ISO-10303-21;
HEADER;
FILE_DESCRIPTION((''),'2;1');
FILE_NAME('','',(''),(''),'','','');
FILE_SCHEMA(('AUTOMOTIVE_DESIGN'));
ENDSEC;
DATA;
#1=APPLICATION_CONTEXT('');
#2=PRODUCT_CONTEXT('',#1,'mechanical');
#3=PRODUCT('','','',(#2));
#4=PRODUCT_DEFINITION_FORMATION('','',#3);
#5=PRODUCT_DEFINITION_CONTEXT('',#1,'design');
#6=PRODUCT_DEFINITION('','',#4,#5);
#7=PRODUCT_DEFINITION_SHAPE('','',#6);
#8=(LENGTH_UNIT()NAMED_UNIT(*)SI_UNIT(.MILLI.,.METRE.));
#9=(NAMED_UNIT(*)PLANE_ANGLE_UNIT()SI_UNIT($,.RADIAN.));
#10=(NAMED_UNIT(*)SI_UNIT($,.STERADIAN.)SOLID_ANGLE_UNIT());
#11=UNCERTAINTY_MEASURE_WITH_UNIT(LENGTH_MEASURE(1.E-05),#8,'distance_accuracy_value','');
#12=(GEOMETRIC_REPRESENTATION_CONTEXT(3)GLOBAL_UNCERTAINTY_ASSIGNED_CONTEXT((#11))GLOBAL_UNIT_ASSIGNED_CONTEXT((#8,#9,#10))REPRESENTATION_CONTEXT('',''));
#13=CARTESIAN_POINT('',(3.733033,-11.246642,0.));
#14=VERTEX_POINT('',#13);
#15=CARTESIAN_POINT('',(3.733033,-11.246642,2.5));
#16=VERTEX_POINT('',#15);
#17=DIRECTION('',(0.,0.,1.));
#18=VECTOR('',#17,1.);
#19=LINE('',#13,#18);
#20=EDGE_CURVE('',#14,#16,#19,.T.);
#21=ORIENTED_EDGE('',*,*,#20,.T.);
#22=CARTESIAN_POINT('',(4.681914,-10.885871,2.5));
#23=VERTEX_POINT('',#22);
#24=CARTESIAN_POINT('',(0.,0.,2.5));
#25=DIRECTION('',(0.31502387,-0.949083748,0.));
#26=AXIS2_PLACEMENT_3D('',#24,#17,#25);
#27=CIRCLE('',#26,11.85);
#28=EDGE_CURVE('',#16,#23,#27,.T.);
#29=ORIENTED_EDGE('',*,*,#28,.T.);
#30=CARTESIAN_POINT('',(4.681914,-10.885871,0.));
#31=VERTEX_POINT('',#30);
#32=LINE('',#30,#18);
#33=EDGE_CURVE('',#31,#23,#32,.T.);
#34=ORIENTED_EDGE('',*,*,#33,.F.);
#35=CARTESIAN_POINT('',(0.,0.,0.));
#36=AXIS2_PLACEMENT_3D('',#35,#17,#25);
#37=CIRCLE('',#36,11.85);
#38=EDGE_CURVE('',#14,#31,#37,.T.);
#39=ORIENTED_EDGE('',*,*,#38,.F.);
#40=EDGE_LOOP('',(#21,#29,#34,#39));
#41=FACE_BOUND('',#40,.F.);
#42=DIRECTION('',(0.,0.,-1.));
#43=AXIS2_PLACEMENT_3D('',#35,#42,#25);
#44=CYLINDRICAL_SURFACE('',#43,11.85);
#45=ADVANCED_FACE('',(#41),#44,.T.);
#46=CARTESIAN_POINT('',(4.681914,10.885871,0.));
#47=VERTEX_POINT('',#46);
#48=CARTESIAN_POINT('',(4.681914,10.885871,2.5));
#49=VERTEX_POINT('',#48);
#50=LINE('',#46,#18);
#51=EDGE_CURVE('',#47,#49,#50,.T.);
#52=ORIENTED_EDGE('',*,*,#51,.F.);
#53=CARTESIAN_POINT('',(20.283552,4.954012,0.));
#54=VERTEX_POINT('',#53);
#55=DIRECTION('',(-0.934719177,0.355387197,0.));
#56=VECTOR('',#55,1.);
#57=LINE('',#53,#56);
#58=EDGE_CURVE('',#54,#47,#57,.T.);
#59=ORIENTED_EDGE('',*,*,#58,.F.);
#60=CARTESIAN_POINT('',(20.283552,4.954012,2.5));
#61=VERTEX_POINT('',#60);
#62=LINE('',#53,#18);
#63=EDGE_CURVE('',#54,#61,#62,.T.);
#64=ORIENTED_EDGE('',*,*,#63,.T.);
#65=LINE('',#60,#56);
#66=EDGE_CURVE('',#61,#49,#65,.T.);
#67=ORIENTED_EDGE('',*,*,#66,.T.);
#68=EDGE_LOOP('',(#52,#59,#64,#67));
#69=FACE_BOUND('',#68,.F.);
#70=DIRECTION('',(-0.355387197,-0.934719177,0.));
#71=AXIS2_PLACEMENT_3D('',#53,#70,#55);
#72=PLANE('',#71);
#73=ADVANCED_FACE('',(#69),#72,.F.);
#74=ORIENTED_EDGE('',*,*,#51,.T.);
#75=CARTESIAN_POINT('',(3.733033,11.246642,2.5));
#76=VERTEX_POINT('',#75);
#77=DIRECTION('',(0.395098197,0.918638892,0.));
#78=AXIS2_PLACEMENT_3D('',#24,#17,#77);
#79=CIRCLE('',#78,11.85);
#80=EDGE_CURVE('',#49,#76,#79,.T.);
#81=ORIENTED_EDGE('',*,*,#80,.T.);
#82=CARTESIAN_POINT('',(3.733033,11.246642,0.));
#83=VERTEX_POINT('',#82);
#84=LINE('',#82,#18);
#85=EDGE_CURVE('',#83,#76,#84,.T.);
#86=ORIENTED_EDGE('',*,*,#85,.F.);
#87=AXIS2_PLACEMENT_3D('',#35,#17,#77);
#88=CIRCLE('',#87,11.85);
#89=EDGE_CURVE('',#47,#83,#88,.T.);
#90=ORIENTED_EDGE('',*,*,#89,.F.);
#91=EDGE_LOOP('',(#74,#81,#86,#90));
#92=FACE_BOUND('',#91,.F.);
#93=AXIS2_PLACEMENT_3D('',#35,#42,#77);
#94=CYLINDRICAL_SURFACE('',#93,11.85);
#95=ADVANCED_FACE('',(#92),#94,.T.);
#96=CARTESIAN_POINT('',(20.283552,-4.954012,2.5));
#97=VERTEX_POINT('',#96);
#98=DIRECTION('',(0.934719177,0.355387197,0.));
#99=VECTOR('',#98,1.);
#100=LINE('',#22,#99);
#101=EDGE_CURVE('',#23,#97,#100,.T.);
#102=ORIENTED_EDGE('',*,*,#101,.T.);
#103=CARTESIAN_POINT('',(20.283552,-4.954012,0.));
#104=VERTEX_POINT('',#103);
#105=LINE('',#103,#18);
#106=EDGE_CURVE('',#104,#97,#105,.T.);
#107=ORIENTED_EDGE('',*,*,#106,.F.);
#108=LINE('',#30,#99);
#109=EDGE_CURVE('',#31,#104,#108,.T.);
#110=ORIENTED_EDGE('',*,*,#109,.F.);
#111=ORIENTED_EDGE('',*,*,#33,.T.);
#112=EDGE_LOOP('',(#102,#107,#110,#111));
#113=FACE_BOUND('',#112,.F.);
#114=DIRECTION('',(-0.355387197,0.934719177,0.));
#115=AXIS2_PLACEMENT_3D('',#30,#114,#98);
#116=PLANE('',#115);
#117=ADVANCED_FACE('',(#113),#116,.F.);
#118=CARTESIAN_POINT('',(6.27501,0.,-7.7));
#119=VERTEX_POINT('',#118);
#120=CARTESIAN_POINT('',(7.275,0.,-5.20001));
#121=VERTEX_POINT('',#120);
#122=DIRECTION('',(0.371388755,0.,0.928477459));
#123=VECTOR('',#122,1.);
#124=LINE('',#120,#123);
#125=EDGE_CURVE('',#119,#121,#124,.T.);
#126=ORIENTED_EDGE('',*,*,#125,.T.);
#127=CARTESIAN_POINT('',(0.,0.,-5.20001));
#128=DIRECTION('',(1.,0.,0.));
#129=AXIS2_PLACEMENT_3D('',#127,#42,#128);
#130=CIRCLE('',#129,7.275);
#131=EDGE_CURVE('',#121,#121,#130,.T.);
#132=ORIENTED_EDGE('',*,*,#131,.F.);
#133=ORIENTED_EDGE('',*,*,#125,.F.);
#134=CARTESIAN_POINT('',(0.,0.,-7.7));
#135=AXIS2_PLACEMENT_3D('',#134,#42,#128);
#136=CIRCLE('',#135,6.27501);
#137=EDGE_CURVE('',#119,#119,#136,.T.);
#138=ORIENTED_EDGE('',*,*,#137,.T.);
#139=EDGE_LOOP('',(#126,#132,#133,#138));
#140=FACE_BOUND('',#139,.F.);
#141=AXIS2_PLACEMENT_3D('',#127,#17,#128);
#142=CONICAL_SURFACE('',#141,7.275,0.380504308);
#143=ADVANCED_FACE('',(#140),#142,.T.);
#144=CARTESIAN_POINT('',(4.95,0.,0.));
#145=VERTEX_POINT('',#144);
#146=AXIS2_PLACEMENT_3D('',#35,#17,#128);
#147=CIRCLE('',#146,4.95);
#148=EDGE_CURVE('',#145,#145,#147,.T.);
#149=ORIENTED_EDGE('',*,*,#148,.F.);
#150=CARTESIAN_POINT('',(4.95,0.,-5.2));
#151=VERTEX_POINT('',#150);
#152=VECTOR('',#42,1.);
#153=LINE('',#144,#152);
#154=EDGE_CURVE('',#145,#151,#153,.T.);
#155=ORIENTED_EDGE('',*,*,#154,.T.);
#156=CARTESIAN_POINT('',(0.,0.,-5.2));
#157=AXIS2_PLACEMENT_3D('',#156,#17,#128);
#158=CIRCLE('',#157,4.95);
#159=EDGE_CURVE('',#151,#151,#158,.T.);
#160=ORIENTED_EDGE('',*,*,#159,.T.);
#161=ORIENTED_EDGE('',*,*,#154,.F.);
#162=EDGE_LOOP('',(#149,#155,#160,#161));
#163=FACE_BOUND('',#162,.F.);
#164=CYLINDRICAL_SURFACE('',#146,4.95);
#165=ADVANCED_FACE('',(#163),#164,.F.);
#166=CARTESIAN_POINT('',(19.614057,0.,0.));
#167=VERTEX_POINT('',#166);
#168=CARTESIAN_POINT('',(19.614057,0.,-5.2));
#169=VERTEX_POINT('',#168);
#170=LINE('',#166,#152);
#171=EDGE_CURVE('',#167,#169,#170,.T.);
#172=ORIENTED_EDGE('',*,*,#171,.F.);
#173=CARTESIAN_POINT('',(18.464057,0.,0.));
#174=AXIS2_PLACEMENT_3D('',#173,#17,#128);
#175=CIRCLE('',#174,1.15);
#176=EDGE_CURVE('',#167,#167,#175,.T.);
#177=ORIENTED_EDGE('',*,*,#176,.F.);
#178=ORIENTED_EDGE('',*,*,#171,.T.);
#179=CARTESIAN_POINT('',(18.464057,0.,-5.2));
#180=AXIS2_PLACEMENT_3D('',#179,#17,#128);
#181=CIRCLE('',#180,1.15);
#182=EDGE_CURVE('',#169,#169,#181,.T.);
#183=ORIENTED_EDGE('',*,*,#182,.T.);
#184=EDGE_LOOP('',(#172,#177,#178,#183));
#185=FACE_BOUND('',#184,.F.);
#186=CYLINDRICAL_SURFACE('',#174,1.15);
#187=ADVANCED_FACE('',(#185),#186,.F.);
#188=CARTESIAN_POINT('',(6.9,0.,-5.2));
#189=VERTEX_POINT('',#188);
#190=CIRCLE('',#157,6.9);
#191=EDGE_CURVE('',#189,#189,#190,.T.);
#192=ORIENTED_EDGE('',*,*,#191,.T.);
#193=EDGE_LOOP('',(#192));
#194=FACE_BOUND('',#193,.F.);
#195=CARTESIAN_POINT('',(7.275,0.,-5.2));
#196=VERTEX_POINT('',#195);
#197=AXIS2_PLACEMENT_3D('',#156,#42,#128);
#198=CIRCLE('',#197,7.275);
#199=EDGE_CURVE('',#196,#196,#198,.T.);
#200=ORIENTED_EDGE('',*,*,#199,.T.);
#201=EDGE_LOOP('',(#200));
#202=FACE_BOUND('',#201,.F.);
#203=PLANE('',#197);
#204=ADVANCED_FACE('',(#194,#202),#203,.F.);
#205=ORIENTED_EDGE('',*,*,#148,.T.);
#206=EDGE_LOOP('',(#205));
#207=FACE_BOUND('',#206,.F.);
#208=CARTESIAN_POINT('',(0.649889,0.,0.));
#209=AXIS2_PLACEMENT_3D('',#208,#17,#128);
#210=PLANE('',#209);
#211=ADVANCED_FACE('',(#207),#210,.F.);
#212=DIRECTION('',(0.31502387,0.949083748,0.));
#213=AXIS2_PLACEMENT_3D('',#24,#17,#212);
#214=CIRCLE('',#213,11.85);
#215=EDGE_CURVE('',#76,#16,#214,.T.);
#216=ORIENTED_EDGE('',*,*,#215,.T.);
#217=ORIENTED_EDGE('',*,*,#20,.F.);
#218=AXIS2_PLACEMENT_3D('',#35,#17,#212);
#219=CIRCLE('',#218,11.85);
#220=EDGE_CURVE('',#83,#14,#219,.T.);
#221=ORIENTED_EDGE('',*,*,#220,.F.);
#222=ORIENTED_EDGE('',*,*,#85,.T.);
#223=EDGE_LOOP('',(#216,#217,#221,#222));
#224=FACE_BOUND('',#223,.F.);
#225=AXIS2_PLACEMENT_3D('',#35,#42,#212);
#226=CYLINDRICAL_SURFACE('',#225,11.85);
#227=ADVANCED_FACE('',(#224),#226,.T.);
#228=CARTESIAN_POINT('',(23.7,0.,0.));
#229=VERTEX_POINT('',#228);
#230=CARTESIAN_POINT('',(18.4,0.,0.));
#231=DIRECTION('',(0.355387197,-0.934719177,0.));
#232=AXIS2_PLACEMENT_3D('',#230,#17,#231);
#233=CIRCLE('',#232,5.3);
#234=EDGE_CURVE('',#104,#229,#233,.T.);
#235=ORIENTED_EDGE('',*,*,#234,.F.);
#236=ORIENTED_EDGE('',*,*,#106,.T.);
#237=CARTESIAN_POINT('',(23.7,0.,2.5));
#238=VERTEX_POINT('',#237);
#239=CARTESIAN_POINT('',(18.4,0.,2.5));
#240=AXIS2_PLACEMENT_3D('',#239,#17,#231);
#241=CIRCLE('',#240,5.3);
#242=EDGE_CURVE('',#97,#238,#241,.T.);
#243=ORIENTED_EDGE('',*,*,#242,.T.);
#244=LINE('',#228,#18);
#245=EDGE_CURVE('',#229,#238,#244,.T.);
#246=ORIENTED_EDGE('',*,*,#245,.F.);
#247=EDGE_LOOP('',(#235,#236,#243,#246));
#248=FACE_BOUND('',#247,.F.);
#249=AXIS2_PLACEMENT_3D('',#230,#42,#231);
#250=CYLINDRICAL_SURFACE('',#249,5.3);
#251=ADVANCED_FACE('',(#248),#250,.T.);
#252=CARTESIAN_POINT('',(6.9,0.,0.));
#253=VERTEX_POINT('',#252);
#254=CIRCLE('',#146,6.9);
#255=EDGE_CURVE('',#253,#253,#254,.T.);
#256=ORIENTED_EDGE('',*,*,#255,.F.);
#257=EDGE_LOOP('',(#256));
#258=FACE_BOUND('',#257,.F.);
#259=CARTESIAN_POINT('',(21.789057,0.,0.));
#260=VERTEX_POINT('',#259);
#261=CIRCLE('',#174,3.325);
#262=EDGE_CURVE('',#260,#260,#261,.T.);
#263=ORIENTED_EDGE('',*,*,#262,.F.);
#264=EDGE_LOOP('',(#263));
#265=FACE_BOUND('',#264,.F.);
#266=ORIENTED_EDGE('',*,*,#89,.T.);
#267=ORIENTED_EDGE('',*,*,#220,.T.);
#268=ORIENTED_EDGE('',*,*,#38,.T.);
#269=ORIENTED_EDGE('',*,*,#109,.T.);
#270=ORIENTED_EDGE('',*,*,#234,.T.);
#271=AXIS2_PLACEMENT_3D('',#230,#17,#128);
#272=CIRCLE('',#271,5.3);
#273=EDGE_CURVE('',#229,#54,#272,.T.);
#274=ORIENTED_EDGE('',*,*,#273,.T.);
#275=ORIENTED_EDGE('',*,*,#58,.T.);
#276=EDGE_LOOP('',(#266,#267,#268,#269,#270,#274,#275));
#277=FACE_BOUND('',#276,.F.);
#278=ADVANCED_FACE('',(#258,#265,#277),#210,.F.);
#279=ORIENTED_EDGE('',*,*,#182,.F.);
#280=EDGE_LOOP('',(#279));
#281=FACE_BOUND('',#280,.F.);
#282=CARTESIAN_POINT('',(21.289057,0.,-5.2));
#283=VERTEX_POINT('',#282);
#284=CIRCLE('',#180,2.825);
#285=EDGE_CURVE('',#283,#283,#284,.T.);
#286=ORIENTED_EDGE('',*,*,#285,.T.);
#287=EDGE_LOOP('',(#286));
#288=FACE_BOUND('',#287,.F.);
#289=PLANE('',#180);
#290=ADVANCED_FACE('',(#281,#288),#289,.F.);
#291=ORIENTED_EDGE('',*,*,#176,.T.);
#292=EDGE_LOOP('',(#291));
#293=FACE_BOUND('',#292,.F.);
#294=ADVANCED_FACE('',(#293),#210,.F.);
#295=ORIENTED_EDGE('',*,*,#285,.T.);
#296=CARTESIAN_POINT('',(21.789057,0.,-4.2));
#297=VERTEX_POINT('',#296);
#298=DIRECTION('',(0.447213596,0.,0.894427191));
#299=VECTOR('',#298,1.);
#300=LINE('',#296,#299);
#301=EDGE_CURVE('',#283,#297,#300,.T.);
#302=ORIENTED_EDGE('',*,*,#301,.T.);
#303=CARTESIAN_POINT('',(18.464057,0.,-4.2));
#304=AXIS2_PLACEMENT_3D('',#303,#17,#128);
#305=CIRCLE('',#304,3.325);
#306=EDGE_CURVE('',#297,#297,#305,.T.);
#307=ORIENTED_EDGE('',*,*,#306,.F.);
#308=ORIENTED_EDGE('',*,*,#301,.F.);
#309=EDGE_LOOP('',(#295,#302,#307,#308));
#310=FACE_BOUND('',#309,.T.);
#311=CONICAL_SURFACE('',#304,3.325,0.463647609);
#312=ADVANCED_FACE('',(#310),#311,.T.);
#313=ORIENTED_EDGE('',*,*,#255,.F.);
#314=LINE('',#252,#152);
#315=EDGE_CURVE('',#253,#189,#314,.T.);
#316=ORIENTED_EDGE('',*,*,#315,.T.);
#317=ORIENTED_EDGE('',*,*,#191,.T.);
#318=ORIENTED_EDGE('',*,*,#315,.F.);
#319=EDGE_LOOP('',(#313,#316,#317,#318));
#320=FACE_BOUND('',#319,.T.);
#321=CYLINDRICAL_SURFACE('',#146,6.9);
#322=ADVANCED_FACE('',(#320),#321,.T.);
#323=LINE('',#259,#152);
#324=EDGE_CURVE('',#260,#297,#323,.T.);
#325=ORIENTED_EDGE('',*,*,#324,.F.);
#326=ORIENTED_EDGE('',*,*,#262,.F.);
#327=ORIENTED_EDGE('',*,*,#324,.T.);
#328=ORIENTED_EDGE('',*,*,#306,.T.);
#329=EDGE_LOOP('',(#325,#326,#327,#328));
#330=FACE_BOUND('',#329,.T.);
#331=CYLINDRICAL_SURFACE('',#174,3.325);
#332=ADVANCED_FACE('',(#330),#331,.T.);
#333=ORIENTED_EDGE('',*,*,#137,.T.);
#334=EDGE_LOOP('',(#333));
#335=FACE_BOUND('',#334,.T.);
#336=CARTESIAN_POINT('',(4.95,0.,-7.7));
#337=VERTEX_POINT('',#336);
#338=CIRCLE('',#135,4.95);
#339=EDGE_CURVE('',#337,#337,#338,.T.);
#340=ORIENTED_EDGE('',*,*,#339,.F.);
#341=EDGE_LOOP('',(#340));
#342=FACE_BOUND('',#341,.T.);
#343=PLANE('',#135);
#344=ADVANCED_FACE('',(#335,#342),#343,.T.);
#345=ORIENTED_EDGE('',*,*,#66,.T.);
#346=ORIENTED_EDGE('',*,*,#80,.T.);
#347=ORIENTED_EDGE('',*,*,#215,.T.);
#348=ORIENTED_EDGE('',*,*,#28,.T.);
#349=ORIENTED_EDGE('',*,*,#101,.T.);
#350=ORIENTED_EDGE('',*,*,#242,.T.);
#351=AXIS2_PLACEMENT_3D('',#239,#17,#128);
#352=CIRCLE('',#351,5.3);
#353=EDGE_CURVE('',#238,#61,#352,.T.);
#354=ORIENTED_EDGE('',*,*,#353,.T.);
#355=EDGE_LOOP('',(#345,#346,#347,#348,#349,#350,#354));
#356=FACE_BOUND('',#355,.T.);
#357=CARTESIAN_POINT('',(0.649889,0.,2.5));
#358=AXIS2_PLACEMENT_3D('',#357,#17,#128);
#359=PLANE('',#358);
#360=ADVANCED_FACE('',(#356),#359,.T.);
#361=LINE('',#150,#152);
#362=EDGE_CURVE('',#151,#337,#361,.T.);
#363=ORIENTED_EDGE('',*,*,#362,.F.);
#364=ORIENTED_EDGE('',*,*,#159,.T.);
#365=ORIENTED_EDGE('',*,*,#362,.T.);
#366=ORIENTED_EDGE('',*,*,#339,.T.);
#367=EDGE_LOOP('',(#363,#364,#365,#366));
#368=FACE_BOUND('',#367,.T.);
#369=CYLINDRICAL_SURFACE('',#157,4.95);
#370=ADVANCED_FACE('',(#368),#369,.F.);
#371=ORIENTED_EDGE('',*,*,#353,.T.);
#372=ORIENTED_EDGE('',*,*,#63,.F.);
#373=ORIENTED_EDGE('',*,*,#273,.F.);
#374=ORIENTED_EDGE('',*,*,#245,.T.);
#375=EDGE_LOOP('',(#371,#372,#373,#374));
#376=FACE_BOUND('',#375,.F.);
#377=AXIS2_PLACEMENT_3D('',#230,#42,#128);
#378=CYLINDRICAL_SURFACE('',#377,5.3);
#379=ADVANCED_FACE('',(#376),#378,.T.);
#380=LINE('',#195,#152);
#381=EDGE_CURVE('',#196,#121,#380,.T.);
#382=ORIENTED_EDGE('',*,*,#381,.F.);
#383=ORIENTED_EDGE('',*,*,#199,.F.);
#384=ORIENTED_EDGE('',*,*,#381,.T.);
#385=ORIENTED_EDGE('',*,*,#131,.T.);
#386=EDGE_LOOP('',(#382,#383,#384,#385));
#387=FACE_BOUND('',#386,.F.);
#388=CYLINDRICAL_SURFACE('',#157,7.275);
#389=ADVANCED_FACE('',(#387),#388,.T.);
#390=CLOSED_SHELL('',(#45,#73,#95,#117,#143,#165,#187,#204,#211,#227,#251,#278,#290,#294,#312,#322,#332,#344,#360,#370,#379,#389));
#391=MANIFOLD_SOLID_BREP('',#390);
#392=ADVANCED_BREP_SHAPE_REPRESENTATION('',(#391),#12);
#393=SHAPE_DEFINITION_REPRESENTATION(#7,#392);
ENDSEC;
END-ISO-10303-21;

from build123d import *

# Parameters (mm, degrees)
F1_DEPTH = 2.5
F2_R     = 6.9
F2_R_2   = 4.95
F2_R_3   = 3.325
F2_R_4   = 1.15
F3_DEPTH = 5.2
F4_R     = 7.275
F4_R_2   = 4.95
F5_DEPTH = 2.5
F6_SIZE2 = 2.49999
F6_SIZE  = 0.99999
F7_SIZE2 = 1
F7_SIZE  = 0.5


# Not quite as in the source:
# - a fillet or chamfer is up to 0.001 mm smaller than in the source, because OpenCascade refuses the exact size


with BuildPart() as f1:
    # F0 (on Top) → F1 (new body)
    with BuildSketch(Plane.XY):
        with BuildLine():
            Line((4.6819136376, 10.8858708742), (3.7330328633, 11.2466424164))
            ThreePointArc((3.7330328633, 11.2466424164), (-11.85, 0), (3.7330328633, -11.2466424164))
            Line((3.7330328633, -11.2466424164), (4.6819136376, -10.8858708742))
            ThreePointArc((4.6819136376, -10.8858708742), (9.8970494746, -6.5169710523), (11.85, 0))
            ThreePointArc((11.85, 0), (9.8970494746, 6.5169710523), (4.6819136376, 10.8858708742))
        make_face()
        with BuildLine():
            ThreePointArc((4.6819136376, 10.8858708742), (4.2113382884, 11.0764222482), (3.7330328633, 11.2466424164))
            Line((3.7330328633, 11.2466424164), (4.6819136376, 10.8858708742))
        make_face()
        with BuildLine():
            Line((4.6819136376, -10.8858708742), (3.7330328633, -11.2466424164))
            ThreePointArc((3.7330328633, -11.2466424164), (4.2113382884, -11.0764222482), (4.6819136376, -10.8858708742))
        make_face()
        with BuildLine():
            Line((20.2835521459, 4.9540116384), (4.6819136376, 10.8858708742))
            ThreePointArc((4.6819136376, 10.8858708742), (9.8970494746, 6.5169710523), (11.85, 0))
            ThreePointArc((11.85, 0), (9.8970494746, -6.5169710523), (4.6819136376, -10.8858708742))
            Line((4.6819136376, -10.8858708742), (20.2835521459, -4.9540116384))
            ThreePointArc((20.2835521459, -4.9540116384), (13.1, 0), (20.2835521459, 4.9540116384))
        make_face()
        with BuildLine():
            ThreePointArc((23.7, 0), (22.7630738232, 3.0089178808), (20.2835521459, 4.9540116384))
            ThreePointArc((20.2835521459, 4.9540116384), (13.1, 0), (20.2835521459, -4.9540116384))
            ThreePointArc((20.2835521459, -4.9540116384), (22.7630738232, -3.0089178808), (23.7, 0))
        make_face()
    extrude(amount=F1_DEPTH)

    # F2 (on Top) → F3 (join)
    with BuildSketch(Plane.XY):
        Circle(F2_R)
        Circle(F2_R_2, mode=Mode.SUBTRACT)
        with Locations((18.464056775, 0)):
            Circle(F2_R_3)
        with Locations((18.464056775, 0)):
            Circle(F2_R_4, mode=Mode.SUBTRACT)
    extrude(amount=-F3_DEPTH)

    # F4 (on face) → F5 (join)
    with BuildSketch(Plane(origin=(0, 0, -5.2), x_dir=(1, 0, 0), z_dir=(0, 0, -1))):
        Circle(F4_R)
        Circle(F4_R_2, mode=Mode.SUBTRACT)
    extrude(amount=F5_DEPTH)

    # F6 (size 1 and 2.5 in the source; OpenCascade refuses exactly that, so slightly less here)
    f6_edges = [f1.edges().sort_by_distance(p)[0] for p in [
        (-7.275, 0, -7.7),
    ]]
    f6_side = f1.faces().sort_by_distance((-7.069232, 0, -7.7))[0]
    chamfer(f6_edges, length=F6_SIZE, length2=F6_SIZE2, reference=f6_side)

    # F7
    f7_edges = [f1.edges().sort_by_distance(p)[0] for p in [
        (15.139057, 0, -5.2),
    ]]
    f7_side = f1.faces().sort_by_distance((15.233102, 0, -5.2))[0]
    chamfer(f7_edges, length=F7_SIZE, length2=F7_SIZE2, reference=f7_side)


solid = f1.part
